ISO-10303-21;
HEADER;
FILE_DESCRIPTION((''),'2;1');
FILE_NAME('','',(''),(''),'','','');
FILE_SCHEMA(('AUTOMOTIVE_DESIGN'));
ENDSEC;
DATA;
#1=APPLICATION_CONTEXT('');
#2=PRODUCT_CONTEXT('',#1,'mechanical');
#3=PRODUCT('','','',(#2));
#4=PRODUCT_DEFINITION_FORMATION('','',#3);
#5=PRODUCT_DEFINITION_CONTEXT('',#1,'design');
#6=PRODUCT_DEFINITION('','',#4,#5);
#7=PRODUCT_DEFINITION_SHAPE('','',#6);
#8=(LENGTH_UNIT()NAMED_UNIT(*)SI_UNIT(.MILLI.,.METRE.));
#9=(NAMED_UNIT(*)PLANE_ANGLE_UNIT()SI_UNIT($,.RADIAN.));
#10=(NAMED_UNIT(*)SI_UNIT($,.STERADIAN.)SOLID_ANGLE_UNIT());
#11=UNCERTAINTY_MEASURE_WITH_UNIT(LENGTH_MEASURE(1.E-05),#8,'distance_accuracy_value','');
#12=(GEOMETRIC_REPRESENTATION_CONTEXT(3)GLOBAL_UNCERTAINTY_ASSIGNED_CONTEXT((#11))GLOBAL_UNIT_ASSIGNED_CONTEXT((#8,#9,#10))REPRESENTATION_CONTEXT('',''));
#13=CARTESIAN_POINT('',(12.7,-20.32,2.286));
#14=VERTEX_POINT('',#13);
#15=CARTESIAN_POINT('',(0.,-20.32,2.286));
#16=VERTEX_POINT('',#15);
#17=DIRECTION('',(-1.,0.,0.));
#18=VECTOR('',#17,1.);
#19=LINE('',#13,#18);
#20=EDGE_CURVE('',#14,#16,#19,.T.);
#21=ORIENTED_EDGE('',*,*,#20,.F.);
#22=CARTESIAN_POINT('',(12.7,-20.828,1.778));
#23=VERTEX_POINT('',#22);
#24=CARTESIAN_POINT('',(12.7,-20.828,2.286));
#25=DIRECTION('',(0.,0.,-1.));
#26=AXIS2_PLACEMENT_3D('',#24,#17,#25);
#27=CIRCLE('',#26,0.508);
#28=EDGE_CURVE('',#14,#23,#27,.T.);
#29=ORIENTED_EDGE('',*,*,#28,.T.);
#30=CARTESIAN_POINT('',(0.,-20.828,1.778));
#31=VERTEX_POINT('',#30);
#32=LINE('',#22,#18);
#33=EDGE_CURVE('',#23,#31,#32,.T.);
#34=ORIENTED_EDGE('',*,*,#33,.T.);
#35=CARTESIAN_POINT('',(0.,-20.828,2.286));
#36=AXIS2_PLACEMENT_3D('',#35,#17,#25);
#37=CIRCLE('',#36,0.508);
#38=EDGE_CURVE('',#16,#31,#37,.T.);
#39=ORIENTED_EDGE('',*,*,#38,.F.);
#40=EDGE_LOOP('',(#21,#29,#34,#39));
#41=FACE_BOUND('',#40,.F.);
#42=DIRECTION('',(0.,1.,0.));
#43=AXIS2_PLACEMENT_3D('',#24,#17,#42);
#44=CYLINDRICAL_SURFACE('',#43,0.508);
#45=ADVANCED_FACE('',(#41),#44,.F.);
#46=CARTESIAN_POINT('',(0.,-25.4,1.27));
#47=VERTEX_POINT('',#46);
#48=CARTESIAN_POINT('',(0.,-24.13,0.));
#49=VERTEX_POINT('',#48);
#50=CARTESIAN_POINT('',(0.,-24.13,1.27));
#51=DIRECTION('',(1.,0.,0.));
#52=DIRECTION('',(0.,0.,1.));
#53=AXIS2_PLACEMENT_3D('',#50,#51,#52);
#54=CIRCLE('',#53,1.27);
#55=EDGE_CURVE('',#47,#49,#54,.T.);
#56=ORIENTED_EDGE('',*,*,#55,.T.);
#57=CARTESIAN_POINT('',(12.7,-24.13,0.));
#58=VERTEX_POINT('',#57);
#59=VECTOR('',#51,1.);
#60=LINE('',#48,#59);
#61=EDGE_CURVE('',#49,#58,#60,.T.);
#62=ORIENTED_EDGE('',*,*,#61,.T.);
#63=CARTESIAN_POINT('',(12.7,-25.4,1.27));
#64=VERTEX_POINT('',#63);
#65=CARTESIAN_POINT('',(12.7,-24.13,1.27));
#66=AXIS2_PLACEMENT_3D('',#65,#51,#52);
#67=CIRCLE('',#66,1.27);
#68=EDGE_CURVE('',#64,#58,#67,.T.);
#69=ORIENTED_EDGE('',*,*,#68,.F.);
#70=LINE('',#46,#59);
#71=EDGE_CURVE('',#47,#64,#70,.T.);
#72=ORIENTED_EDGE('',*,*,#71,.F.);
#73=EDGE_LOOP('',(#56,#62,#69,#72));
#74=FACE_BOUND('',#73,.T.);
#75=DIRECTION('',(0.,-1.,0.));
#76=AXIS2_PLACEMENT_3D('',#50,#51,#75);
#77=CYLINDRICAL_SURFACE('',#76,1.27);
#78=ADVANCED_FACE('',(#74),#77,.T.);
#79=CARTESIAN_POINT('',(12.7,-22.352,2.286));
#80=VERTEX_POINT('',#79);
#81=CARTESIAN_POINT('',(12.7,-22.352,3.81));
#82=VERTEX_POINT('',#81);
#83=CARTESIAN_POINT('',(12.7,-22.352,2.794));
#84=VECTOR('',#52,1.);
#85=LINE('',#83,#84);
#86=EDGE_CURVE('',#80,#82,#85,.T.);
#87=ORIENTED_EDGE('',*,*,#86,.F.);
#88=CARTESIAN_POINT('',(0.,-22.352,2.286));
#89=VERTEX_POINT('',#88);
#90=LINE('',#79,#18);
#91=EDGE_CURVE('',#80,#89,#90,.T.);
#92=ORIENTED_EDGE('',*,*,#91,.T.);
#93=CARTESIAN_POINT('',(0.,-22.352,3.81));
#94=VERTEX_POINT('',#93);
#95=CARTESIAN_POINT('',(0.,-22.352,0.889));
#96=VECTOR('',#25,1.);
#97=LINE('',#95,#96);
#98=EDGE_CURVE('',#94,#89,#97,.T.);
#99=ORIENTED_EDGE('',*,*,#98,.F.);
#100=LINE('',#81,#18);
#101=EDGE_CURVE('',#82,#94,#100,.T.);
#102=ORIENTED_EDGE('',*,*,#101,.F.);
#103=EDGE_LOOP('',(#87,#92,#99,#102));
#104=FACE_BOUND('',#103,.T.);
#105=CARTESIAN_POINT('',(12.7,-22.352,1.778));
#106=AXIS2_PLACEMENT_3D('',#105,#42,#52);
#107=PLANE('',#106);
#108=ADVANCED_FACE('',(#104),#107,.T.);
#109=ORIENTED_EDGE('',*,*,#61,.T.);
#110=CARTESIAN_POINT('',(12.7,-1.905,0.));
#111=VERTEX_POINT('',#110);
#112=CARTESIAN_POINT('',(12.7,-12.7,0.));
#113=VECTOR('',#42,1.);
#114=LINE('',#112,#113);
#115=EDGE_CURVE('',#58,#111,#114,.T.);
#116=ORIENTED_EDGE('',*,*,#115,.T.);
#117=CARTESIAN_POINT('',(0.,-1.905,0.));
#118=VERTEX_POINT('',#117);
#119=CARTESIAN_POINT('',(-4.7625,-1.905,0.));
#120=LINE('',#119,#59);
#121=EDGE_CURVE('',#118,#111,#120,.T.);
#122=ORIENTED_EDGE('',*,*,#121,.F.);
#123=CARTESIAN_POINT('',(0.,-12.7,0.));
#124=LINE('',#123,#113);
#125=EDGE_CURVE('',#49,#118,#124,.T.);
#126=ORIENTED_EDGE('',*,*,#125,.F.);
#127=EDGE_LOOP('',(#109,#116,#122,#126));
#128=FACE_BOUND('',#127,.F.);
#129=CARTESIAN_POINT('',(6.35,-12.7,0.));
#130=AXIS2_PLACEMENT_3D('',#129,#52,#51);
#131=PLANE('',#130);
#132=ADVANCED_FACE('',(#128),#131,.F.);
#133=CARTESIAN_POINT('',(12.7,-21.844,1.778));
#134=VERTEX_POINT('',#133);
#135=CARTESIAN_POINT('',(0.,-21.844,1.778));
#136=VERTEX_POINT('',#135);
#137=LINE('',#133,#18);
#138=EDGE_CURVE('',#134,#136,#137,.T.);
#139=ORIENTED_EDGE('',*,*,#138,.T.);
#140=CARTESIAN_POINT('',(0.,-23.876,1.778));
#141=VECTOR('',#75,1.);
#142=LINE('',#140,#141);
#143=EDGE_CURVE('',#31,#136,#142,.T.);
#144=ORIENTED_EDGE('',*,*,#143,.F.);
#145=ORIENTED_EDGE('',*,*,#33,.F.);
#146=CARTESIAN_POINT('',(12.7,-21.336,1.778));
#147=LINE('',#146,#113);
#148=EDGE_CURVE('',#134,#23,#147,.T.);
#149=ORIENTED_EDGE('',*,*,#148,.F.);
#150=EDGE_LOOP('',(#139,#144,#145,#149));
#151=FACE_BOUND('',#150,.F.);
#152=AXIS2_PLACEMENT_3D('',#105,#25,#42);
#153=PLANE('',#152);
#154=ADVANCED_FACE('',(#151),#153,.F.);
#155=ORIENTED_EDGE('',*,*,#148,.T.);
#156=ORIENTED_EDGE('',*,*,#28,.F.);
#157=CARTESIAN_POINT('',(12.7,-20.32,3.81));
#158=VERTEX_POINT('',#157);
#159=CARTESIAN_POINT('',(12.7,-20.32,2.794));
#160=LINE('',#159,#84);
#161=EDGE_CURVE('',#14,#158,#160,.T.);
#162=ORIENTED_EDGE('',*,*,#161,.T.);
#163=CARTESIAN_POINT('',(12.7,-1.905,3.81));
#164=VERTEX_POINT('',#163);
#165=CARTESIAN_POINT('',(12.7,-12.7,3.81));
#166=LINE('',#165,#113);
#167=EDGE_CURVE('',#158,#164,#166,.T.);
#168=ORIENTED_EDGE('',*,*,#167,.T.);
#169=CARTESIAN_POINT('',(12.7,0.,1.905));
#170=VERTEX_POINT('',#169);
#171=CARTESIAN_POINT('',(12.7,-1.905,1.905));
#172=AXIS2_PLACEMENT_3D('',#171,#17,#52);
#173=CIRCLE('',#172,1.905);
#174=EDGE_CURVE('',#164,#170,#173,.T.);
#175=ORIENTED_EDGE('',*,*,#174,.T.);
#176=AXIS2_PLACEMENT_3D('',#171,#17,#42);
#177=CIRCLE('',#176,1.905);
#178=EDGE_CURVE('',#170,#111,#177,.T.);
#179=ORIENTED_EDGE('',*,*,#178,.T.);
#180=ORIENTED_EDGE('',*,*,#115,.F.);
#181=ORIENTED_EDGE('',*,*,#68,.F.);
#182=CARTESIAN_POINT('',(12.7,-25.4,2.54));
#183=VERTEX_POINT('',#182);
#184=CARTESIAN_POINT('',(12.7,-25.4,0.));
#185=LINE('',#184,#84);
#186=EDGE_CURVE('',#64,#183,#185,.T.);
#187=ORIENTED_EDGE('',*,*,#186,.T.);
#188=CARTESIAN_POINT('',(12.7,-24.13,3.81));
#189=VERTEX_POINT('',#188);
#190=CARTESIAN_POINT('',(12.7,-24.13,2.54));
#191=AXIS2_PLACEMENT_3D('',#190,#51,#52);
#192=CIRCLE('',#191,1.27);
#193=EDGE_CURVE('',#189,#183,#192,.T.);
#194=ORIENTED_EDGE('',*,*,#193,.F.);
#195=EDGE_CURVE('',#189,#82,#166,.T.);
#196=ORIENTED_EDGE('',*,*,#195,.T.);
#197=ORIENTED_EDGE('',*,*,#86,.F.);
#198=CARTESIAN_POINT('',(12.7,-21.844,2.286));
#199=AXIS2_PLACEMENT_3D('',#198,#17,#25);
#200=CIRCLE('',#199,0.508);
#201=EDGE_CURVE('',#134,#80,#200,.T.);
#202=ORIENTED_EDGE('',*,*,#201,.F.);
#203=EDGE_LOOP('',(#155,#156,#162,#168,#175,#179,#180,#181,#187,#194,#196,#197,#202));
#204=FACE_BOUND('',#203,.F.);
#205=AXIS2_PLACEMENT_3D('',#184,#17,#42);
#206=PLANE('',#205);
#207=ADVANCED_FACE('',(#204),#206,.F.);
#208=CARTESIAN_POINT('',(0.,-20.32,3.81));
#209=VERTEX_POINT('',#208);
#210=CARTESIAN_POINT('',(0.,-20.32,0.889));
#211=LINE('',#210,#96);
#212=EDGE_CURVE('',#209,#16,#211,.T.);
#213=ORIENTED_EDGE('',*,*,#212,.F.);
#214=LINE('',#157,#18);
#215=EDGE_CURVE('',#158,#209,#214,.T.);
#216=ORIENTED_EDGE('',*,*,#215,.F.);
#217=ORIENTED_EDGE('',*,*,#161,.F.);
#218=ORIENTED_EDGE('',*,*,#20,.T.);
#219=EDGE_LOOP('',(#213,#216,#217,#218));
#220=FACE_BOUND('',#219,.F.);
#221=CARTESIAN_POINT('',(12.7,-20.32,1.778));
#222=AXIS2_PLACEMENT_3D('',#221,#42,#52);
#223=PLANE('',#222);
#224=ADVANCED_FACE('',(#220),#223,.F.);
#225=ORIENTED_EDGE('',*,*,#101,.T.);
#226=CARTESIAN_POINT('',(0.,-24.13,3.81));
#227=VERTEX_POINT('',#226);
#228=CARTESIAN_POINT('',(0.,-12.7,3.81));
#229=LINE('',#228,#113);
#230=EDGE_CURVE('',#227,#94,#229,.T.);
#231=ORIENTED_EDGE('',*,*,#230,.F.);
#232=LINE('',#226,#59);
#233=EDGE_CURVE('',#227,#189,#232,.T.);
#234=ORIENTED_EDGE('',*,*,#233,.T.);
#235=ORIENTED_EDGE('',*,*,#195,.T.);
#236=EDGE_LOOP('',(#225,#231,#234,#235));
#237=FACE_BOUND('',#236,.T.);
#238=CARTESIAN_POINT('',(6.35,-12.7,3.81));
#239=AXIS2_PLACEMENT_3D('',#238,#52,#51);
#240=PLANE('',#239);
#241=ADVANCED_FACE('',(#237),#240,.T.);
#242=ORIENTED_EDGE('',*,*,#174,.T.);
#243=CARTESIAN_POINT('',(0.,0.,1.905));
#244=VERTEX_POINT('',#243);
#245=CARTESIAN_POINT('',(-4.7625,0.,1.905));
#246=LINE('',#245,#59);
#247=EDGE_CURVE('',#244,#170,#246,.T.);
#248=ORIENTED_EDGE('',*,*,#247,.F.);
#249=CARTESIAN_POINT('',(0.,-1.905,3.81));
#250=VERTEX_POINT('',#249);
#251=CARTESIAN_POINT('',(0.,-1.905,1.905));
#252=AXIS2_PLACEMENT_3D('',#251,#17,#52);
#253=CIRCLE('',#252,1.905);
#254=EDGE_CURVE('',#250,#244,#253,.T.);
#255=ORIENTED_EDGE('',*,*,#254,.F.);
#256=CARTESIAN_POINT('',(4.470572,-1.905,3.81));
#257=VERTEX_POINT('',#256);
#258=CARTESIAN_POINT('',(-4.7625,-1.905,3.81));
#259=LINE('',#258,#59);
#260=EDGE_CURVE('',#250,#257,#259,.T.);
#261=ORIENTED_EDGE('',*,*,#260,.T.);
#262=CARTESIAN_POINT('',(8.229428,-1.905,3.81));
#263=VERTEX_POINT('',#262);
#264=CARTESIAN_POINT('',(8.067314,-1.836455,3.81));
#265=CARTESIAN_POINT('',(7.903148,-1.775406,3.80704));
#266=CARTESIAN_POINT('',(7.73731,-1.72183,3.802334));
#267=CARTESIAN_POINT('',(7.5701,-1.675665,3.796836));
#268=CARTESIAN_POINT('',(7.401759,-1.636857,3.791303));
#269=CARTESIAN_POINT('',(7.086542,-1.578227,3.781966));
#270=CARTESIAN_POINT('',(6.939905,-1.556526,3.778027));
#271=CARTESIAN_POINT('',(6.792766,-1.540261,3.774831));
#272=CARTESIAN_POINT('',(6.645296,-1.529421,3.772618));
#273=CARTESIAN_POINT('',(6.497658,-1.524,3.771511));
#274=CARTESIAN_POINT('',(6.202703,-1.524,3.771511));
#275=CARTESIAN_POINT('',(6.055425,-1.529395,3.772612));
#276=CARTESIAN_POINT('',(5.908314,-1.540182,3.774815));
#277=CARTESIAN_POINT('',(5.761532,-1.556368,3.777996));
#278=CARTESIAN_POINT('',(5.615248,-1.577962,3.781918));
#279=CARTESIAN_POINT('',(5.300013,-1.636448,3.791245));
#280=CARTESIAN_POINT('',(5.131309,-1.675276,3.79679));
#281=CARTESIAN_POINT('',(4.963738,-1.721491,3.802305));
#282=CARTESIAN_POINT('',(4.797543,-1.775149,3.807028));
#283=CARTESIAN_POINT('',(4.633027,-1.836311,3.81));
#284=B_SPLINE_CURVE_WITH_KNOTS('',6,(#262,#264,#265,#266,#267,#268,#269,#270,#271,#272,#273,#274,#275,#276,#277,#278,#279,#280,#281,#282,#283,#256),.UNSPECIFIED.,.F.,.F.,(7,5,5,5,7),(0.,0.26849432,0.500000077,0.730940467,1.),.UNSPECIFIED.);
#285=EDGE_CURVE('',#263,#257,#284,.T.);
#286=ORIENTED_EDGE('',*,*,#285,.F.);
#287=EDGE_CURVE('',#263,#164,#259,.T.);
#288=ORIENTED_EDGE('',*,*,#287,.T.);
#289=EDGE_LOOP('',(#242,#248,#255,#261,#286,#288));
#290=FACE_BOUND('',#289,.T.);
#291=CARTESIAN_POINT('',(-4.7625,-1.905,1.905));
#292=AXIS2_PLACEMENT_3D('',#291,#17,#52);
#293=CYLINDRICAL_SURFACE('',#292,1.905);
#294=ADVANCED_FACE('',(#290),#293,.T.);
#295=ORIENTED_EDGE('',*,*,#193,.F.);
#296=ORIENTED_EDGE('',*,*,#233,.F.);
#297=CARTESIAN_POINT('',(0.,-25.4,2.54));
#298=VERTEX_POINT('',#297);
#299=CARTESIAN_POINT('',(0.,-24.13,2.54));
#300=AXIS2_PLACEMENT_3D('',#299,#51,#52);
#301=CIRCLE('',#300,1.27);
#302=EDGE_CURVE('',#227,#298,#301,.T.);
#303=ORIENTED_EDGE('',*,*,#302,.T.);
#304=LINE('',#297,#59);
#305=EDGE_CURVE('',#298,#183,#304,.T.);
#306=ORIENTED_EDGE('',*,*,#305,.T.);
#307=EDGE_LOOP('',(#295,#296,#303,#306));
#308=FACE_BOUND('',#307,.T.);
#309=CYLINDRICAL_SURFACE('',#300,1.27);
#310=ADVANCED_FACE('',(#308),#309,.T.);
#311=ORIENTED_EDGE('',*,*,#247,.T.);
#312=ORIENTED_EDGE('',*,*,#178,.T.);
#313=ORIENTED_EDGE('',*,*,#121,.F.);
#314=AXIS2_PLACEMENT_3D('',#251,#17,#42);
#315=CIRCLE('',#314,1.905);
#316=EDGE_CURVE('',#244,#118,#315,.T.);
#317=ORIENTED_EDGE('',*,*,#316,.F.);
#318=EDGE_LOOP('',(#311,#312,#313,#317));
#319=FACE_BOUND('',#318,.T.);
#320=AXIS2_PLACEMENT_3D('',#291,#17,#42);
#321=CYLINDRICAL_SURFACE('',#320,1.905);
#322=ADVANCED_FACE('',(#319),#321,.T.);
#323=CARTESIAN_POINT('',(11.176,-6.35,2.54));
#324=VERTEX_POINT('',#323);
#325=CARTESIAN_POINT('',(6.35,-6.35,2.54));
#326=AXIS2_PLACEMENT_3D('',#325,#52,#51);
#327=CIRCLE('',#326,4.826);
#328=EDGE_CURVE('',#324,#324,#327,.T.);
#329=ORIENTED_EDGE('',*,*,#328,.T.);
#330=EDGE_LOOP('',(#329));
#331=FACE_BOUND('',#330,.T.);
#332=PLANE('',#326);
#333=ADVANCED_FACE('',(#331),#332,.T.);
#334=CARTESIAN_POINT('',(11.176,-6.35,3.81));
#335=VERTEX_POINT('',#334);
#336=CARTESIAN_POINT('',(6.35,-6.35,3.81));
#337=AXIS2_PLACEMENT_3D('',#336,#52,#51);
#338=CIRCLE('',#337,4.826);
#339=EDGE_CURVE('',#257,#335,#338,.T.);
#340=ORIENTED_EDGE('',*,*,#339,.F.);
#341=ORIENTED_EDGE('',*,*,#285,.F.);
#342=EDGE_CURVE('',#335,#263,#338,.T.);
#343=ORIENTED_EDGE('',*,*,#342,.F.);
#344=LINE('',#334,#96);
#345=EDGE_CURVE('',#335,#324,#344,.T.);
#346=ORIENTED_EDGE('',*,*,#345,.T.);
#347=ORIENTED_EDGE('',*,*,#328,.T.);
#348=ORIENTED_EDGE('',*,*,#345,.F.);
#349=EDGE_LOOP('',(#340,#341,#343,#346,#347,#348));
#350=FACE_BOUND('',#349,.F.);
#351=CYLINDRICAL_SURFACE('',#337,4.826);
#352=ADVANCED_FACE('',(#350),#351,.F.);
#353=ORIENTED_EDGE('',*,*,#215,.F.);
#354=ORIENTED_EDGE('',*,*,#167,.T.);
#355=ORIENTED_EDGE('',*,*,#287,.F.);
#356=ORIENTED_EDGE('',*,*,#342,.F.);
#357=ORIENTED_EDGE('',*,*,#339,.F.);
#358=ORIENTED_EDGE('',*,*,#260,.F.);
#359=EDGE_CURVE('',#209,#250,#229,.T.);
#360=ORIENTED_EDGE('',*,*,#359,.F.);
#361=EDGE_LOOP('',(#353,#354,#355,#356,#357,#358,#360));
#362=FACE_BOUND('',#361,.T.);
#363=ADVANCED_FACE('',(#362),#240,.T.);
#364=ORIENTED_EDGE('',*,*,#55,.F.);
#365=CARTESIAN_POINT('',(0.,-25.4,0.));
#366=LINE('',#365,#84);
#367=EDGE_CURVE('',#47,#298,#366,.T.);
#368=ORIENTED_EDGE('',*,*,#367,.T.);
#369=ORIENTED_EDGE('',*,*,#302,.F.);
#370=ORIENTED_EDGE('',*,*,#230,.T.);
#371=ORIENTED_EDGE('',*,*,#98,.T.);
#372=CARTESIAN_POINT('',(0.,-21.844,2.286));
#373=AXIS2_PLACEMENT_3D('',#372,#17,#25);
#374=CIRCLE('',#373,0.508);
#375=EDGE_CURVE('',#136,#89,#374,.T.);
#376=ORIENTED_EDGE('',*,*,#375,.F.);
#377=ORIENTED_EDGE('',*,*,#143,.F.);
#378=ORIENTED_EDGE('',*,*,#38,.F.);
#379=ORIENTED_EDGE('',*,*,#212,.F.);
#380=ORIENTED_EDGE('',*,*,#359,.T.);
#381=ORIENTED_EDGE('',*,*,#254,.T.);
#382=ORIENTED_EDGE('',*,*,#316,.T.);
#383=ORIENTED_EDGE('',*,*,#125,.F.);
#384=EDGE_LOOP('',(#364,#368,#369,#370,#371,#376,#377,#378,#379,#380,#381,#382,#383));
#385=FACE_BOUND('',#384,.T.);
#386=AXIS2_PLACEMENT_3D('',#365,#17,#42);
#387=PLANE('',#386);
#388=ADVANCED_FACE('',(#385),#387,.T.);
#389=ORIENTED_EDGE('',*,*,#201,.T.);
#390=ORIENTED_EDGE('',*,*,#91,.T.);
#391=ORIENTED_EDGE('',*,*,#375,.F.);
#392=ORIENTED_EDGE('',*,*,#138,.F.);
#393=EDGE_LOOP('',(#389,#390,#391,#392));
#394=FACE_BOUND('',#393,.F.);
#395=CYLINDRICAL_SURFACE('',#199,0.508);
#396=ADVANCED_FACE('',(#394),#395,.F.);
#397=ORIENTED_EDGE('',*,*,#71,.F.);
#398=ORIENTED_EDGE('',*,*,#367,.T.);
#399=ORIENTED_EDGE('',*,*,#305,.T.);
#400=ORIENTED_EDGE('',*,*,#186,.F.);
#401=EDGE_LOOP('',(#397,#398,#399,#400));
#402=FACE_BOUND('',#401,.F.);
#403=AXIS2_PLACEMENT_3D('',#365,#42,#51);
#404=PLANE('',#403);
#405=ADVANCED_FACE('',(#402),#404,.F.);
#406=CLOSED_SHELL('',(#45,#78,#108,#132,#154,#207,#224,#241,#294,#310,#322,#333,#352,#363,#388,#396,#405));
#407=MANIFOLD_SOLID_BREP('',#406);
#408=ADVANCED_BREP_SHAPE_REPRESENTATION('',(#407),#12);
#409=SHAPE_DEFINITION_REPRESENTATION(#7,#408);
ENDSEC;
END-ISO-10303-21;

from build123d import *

# Parameters (mm, degrees)
F0_W        = 12.7
F0_H        = 25.4
F1_DEPTH    = 3.81
F2_R        = 4.826
F3_DEPTH    = 1.27
F4_W        = 2.032
F4_H        = 2.032
F5_DEPTH    = 25.4
F6_R        = 0.508
F7_T1_DEPTH = 22.225
F8_R        = 1.27


# Not quite as in the source:
# - a fillet or chamfer that OpenCascade refuses, or shapes differently, is made with other operations: its cross-section is extruded or revolved along the edge and cut away or added


with BuildPart() as f1:
    # F0 (on Top) → F1 (new body)
    with BuildSketch(Plane.XY):
        with Locations((6.35, -12.7)):
            Rectangle(F0_W, F0_H)
    extrude(amount=F1_DEPTH)

    # F2 (on face) → F3 (cut)
    with BuildSketch(Plane.XY.offset(3.81)):
        with Locations((6.35, -6.35)):
            Circle(F2_R)
    extrude(amount=-F3_DEPTH, mode=Mode.SUBTRACT)

    # F4 (on face) → F5 (cut)
    with BuildSketch(Plane.YZ.offset(12.7)):
        with Locations((-21.336, 2.794)):
            Rectangle(F4_W, F4_H)
    extrude(amount=-F5_DEPTH, mode=Mode.SUBTRACT)

    # F6
    f6_edges = [f1.edges().sort_by_distance(p)[0] for p in [
        (6.35, -20.32, 1.778),
        (6.35, -22.352, 1.778),
    ]]
    fillet(f6_edges, radius=F6_R)

    # F7: fillet of radius 1.905 on 2 edges, made by hand

    # F7_s2 → F7_t1 (cut)
    with BuildSketch(Plane.YZ.offset(-4.7625)):
        with BuildLine():
            ThreePointArc((0, 1.905), (-0.5579615818, 0.5579615818), (-1.905, 0))
            Line((-1.905, 0), (0, 0))
            Line((0, 0), (0, 1.905))
        make_face()
        with BuildLine():
            ThreePointArc((-1.905, 3.81), (-0.5579615818, 3.2520384182), (0, 1.905))
            Line((0, 1.905), (0, 3.81))
            Line((0, 3.81), (-1.905, 3.81))
        make_face()
    extrude(amount=F7_T1_DEPTH, mode=Mode.SUBTRACT)

    # F8
    f8_edges = [f1.edges().sort_by_distance(p)[0] for p in [
        (6.35, -25.4, 3.81),
        (6.35, -25.4, 0),
    ]]
    fillet(f8_edges, radius=F8_R)


solid = f1.part
